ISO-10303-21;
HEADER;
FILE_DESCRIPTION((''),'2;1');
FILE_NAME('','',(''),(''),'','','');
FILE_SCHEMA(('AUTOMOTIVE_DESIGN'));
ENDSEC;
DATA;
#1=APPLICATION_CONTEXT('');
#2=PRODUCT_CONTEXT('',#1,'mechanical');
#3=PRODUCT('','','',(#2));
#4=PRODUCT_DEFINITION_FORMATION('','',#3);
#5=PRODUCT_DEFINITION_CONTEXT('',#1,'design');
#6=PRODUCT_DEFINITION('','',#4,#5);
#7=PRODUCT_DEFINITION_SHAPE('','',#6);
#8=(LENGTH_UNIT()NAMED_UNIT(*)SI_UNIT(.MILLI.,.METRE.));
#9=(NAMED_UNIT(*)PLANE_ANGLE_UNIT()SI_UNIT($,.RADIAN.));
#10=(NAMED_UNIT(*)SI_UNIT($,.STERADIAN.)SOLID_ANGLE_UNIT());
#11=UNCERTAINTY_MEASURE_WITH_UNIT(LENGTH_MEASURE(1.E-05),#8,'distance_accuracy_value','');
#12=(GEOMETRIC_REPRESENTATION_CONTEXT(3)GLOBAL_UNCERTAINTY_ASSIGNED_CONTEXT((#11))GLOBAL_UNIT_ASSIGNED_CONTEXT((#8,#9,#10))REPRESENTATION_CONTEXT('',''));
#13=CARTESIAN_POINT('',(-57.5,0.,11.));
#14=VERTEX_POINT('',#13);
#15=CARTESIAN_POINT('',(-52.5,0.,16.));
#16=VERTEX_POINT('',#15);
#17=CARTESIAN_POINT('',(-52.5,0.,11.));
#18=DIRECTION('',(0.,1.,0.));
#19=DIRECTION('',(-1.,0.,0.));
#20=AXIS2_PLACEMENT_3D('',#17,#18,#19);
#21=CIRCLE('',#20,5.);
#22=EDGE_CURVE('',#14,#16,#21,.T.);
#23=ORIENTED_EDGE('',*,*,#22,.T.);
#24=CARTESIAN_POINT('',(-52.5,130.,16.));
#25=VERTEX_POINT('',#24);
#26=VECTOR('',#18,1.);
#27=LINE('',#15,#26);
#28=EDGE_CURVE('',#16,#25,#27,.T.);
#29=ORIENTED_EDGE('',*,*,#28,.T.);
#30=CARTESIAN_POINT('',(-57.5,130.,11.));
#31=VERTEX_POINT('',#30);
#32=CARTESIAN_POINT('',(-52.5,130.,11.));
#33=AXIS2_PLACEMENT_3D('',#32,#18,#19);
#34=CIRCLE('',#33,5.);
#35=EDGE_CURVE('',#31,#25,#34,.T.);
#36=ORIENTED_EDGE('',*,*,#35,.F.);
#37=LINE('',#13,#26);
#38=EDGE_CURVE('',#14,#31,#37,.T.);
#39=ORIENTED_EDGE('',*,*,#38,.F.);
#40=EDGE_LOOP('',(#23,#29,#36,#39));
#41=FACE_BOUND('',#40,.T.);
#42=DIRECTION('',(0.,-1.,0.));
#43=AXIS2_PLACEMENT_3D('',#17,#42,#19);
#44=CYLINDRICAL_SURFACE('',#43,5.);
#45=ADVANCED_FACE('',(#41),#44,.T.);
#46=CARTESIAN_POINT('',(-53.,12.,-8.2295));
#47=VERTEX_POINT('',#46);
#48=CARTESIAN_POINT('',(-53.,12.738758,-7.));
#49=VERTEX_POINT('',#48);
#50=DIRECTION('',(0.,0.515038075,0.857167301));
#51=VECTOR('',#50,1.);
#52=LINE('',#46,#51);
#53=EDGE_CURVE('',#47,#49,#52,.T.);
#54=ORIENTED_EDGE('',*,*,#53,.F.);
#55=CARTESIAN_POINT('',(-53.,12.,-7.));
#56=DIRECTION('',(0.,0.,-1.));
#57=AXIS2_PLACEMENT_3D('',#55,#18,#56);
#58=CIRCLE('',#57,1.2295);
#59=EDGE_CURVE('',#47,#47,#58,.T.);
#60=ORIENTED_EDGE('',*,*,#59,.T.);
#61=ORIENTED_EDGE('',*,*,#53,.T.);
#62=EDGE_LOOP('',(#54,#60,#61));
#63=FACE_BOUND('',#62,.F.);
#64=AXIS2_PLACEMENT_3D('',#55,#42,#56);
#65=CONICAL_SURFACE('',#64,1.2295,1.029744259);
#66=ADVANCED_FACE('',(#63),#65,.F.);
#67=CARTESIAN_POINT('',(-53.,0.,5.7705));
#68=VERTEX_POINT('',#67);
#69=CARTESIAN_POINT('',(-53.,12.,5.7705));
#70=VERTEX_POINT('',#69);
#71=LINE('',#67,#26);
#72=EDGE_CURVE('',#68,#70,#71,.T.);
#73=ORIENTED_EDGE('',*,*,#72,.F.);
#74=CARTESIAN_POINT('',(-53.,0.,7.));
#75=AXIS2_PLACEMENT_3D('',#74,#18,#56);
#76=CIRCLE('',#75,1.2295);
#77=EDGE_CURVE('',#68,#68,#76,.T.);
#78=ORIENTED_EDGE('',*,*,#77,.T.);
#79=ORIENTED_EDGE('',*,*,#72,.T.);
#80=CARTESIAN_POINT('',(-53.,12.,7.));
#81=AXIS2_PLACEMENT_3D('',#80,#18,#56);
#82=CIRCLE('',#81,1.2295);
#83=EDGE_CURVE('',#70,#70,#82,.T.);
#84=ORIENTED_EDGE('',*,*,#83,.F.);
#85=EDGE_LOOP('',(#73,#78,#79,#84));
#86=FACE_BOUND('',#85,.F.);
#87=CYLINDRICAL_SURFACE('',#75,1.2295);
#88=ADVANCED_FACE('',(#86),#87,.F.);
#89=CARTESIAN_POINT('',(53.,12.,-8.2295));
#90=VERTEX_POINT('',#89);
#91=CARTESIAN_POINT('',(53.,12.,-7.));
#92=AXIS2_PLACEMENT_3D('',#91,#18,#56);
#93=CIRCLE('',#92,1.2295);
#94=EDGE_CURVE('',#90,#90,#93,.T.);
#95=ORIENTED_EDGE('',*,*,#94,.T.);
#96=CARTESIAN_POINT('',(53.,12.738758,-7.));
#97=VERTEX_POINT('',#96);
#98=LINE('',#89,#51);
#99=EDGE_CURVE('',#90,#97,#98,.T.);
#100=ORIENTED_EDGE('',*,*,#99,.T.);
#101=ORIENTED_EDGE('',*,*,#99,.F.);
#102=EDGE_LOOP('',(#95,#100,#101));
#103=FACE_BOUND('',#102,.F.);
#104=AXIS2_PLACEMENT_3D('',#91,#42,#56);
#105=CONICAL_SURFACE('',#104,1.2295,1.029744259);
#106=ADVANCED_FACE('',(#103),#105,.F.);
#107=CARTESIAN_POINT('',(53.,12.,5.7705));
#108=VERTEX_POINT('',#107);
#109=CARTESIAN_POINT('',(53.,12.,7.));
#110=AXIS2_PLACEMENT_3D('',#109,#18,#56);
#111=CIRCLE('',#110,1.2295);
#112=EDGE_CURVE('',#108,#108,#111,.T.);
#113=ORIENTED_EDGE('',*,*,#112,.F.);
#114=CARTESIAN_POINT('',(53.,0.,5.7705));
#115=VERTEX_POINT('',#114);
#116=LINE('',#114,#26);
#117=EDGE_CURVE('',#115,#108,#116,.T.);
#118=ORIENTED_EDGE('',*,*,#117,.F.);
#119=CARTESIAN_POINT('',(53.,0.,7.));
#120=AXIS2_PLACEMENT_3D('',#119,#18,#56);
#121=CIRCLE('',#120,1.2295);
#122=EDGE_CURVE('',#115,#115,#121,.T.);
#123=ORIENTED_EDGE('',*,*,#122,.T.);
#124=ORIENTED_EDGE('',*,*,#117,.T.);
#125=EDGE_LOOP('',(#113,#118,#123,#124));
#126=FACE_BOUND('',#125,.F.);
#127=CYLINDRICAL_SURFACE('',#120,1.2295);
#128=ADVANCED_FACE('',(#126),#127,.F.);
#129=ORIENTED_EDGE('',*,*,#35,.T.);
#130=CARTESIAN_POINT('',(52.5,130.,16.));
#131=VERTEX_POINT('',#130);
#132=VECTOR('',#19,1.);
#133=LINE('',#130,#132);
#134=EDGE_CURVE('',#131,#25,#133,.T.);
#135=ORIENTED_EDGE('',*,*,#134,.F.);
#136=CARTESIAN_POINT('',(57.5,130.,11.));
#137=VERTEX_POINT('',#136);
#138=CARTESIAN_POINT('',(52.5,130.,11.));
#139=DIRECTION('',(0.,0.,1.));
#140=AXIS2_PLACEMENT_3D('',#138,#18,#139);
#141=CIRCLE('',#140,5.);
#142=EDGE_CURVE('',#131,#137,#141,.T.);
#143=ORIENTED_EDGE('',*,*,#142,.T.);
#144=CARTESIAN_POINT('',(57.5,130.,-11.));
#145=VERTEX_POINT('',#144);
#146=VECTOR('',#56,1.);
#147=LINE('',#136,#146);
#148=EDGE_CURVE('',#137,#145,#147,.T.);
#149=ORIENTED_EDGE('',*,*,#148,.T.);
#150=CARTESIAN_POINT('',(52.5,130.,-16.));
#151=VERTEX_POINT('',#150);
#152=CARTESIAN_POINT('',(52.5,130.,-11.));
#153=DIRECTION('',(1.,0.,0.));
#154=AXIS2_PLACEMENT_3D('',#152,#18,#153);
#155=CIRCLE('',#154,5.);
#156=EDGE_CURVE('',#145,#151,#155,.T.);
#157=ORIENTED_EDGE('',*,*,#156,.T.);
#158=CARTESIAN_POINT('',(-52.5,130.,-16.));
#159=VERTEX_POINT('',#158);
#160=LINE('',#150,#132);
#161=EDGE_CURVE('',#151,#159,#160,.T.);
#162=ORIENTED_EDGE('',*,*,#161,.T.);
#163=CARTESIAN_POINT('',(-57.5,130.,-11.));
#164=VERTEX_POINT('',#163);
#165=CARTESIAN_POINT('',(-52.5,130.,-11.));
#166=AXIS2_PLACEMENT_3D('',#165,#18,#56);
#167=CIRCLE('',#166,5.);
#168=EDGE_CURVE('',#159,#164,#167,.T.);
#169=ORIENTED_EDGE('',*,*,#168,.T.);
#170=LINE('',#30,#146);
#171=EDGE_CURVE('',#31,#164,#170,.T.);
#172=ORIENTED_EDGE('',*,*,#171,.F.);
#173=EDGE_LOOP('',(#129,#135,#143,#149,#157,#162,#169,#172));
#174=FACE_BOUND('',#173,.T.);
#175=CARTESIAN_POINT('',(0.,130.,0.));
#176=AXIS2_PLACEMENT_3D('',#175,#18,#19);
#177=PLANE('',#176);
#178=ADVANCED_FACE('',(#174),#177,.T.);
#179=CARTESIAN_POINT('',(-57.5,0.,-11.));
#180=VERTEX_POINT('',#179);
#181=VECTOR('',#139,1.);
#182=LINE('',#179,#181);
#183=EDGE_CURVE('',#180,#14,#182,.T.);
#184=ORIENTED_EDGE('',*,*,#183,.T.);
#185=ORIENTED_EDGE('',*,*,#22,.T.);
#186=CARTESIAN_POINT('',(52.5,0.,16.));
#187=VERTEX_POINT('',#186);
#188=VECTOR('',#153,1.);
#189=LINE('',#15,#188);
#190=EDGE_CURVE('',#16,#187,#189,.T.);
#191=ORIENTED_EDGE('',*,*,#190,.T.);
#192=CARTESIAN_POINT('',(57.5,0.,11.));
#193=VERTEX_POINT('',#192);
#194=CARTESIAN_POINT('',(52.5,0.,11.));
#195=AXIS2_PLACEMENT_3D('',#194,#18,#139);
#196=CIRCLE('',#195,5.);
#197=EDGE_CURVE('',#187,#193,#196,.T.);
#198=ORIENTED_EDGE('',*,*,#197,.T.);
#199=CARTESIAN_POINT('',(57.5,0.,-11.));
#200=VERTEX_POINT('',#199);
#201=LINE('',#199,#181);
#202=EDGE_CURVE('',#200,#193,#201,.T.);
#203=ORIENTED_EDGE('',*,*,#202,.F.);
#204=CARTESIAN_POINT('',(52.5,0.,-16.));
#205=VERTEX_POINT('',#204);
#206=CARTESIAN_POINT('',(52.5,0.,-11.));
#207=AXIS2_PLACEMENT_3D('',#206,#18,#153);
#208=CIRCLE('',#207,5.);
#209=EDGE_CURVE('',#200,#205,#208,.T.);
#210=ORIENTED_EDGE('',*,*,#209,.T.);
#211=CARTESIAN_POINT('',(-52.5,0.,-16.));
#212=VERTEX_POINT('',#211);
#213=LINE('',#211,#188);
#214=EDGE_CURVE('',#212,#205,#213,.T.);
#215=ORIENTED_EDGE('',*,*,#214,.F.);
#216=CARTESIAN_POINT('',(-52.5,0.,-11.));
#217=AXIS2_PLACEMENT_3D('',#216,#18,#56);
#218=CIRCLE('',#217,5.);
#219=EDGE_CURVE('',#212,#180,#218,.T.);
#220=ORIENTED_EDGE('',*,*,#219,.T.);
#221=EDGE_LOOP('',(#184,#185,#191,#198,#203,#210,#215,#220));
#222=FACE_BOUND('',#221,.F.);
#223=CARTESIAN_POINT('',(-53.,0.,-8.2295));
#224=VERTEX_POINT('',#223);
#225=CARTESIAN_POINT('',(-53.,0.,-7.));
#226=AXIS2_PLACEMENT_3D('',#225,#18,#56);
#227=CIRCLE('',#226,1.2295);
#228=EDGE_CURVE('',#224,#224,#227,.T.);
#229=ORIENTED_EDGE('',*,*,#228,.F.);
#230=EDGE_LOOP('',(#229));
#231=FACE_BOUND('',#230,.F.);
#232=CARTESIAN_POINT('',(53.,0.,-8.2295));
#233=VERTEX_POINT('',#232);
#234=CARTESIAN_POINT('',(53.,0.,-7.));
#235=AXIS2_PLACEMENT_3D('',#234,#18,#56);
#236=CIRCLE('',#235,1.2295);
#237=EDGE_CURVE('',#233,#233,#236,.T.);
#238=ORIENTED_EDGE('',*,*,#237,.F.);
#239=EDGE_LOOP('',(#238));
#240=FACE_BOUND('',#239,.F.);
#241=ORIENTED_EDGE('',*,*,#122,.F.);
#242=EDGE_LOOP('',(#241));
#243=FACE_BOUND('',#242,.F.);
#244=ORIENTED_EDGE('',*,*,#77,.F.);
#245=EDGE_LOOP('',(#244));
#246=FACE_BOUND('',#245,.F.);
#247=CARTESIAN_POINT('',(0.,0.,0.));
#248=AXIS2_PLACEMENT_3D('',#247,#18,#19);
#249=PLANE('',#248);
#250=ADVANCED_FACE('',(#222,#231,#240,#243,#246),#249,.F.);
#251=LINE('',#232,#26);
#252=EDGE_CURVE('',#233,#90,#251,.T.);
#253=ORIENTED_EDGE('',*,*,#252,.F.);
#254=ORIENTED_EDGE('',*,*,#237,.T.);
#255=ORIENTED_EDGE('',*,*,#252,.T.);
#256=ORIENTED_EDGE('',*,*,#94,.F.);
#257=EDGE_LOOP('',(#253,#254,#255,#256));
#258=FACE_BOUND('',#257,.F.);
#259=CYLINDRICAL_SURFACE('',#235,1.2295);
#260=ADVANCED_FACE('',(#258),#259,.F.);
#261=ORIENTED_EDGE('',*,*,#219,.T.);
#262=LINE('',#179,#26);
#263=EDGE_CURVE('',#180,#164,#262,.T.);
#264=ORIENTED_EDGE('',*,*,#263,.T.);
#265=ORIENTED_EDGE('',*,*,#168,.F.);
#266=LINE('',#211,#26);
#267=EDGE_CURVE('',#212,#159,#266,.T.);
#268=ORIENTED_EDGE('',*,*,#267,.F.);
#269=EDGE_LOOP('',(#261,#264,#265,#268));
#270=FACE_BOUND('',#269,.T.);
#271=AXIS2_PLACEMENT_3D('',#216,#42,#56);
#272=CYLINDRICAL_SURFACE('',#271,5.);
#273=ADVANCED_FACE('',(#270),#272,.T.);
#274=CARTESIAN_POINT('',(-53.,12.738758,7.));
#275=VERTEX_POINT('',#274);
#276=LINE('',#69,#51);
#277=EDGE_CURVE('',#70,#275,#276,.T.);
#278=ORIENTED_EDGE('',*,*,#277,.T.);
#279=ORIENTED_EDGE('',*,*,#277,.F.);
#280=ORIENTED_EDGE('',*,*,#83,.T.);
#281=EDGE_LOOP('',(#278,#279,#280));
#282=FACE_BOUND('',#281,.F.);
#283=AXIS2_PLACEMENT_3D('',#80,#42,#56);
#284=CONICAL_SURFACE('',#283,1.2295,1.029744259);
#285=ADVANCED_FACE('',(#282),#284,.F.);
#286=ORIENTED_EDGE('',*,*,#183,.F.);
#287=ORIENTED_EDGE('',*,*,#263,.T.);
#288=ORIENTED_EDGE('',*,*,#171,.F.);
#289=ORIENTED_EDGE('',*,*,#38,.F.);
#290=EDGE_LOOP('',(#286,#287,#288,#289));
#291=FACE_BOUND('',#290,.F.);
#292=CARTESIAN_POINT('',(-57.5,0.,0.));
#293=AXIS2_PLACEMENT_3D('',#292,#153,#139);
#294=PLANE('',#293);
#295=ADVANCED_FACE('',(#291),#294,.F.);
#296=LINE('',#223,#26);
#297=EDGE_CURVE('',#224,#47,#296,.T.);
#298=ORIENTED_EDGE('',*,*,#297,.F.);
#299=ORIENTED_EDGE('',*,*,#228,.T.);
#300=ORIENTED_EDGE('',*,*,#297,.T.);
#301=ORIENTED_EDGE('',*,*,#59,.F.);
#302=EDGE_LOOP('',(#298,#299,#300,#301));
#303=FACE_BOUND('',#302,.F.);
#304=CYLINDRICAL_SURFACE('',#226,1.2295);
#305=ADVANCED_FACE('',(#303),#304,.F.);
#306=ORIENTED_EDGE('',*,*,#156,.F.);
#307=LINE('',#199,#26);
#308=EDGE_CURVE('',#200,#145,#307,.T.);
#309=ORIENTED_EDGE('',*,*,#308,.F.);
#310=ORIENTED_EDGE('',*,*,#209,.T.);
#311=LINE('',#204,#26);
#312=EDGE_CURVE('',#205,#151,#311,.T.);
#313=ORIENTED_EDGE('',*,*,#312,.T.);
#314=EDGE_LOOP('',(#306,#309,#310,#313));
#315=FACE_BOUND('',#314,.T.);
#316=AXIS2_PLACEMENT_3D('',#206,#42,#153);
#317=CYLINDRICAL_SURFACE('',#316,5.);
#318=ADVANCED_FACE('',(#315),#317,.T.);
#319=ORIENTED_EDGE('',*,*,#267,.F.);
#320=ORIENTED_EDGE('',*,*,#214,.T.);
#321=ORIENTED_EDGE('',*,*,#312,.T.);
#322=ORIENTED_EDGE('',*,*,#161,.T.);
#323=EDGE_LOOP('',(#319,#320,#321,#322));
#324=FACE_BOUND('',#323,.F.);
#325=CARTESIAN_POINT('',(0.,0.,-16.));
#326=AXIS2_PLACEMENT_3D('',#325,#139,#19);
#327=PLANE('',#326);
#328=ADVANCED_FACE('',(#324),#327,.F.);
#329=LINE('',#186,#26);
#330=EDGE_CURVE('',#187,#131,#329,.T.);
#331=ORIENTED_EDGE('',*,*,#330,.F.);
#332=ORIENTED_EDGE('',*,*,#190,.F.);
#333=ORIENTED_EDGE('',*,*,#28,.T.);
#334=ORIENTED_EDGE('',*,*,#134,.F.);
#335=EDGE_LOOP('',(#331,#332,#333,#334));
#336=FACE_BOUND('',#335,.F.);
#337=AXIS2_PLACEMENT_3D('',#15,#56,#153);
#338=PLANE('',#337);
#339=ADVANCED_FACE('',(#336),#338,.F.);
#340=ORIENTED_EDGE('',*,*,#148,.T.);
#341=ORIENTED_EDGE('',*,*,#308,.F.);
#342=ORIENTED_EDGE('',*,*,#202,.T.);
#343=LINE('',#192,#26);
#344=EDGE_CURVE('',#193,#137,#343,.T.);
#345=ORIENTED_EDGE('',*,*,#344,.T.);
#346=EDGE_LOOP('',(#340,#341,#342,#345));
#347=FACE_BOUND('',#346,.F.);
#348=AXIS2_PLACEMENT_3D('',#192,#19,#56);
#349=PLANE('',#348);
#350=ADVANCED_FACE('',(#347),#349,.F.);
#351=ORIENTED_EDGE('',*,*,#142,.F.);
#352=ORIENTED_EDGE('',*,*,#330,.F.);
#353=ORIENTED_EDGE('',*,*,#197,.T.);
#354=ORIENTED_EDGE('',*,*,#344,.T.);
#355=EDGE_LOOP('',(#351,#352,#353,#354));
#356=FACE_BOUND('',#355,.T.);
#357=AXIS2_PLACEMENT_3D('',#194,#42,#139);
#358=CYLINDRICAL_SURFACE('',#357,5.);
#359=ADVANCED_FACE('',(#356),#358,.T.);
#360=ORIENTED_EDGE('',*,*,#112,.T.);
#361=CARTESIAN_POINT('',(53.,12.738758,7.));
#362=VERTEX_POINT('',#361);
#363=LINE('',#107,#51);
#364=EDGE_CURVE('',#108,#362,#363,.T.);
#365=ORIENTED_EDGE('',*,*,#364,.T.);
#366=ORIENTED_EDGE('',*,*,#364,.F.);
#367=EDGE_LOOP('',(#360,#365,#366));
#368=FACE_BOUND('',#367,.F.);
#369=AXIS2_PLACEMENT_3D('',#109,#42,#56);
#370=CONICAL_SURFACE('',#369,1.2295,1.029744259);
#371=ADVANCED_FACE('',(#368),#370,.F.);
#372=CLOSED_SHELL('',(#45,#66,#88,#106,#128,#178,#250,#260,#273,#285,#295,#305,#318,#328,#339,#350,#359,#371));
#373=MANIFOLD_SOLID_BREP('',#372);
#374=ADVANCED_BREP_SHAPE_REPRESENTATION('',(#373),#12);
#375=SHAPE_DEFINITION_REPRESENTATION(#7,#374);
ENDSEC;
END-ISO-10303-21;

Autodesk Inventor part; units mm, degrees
ref_plane "YZ Plane" through (0, 0, 0) normal (1, 0, 0) x (0, 1, 0)
ref_plane "XZ Plane" through (0, 0, 0) normal (0, 1, 0) x (-1, 0, 0)
ref_plane "XY Plane" through (0, 0, 0) normal (0, 0, 1) x (1, 0, 0)
sketch "Skizze1" plane through (0, 0, 0) normal (0, 1, 0) x (-1, 0, 0)
  line L0 (52.5, 16) -> (-52.5, 16)
  line L1 (-57.5, 11) -> (-57.5, -11)
  line L2 (-52.5, -16) -> (52.5, -16)
  line L3 (57.5, -11) -> (57.5, 11)
  line L4 (81.9497, 0) -> (-81.9497, 0) projected
  line L5 (0, -23.8497) -> (0, 23.8497) projected
  arc A0 (57.5, 11) -> (52.5, 16) centre (52.5, 11) ccw
  arc A1 (52.5, -16) -> (57.5, -11) centre (52.5, -11) ccw
  arc A2 (-52.5, 16) -> (-57.5, 11) centre (-52.5, 11) ccw
  arc A3 (-57.5, -11) -> (-52.5, -16) centre (-52.5, -11) ccw
  circle A4 centre (53, 7) radius 1.5
  circle A5 centre (53, -7) radius 1.5
  circle A6 centre (-53, 7) radius 1.5
  circle A7 centre (-53, -7) radius 1.5
  point P0 (0, 0)
  point P1 (57.5, 16)
  point P2 (-57.5, 16)
  point P3 (57.5, -16)
  dimension "d0" = 115
  dimension "d1" = 32
  dimension "d2" = 5
  dimension "d3" = 3
  dimension "d4" = 7
  dimension "d5" = 53
extrude "Extrusion1" add sketch "Skizze1" along normal blind 130 contours A0 L3 L4 L5 L0 | L5 L4 L1 A2 L0 | L5 L2 A3 L1 L4 | L4 L3 A1 L2 L5 | A4 | A5 | A6 | A7
hole "Bohrung1" at (53, 0, 7) at (53, 0, -7) at (-53, 0, 7) at (-53, 0, -7) direction (0, 1, 0) diameter 2.459 depth 12 tip angle 118 thread size "M3x0.5" class "6H" standard "ISO Metric profile"
properties part number "Lardis_grob"
